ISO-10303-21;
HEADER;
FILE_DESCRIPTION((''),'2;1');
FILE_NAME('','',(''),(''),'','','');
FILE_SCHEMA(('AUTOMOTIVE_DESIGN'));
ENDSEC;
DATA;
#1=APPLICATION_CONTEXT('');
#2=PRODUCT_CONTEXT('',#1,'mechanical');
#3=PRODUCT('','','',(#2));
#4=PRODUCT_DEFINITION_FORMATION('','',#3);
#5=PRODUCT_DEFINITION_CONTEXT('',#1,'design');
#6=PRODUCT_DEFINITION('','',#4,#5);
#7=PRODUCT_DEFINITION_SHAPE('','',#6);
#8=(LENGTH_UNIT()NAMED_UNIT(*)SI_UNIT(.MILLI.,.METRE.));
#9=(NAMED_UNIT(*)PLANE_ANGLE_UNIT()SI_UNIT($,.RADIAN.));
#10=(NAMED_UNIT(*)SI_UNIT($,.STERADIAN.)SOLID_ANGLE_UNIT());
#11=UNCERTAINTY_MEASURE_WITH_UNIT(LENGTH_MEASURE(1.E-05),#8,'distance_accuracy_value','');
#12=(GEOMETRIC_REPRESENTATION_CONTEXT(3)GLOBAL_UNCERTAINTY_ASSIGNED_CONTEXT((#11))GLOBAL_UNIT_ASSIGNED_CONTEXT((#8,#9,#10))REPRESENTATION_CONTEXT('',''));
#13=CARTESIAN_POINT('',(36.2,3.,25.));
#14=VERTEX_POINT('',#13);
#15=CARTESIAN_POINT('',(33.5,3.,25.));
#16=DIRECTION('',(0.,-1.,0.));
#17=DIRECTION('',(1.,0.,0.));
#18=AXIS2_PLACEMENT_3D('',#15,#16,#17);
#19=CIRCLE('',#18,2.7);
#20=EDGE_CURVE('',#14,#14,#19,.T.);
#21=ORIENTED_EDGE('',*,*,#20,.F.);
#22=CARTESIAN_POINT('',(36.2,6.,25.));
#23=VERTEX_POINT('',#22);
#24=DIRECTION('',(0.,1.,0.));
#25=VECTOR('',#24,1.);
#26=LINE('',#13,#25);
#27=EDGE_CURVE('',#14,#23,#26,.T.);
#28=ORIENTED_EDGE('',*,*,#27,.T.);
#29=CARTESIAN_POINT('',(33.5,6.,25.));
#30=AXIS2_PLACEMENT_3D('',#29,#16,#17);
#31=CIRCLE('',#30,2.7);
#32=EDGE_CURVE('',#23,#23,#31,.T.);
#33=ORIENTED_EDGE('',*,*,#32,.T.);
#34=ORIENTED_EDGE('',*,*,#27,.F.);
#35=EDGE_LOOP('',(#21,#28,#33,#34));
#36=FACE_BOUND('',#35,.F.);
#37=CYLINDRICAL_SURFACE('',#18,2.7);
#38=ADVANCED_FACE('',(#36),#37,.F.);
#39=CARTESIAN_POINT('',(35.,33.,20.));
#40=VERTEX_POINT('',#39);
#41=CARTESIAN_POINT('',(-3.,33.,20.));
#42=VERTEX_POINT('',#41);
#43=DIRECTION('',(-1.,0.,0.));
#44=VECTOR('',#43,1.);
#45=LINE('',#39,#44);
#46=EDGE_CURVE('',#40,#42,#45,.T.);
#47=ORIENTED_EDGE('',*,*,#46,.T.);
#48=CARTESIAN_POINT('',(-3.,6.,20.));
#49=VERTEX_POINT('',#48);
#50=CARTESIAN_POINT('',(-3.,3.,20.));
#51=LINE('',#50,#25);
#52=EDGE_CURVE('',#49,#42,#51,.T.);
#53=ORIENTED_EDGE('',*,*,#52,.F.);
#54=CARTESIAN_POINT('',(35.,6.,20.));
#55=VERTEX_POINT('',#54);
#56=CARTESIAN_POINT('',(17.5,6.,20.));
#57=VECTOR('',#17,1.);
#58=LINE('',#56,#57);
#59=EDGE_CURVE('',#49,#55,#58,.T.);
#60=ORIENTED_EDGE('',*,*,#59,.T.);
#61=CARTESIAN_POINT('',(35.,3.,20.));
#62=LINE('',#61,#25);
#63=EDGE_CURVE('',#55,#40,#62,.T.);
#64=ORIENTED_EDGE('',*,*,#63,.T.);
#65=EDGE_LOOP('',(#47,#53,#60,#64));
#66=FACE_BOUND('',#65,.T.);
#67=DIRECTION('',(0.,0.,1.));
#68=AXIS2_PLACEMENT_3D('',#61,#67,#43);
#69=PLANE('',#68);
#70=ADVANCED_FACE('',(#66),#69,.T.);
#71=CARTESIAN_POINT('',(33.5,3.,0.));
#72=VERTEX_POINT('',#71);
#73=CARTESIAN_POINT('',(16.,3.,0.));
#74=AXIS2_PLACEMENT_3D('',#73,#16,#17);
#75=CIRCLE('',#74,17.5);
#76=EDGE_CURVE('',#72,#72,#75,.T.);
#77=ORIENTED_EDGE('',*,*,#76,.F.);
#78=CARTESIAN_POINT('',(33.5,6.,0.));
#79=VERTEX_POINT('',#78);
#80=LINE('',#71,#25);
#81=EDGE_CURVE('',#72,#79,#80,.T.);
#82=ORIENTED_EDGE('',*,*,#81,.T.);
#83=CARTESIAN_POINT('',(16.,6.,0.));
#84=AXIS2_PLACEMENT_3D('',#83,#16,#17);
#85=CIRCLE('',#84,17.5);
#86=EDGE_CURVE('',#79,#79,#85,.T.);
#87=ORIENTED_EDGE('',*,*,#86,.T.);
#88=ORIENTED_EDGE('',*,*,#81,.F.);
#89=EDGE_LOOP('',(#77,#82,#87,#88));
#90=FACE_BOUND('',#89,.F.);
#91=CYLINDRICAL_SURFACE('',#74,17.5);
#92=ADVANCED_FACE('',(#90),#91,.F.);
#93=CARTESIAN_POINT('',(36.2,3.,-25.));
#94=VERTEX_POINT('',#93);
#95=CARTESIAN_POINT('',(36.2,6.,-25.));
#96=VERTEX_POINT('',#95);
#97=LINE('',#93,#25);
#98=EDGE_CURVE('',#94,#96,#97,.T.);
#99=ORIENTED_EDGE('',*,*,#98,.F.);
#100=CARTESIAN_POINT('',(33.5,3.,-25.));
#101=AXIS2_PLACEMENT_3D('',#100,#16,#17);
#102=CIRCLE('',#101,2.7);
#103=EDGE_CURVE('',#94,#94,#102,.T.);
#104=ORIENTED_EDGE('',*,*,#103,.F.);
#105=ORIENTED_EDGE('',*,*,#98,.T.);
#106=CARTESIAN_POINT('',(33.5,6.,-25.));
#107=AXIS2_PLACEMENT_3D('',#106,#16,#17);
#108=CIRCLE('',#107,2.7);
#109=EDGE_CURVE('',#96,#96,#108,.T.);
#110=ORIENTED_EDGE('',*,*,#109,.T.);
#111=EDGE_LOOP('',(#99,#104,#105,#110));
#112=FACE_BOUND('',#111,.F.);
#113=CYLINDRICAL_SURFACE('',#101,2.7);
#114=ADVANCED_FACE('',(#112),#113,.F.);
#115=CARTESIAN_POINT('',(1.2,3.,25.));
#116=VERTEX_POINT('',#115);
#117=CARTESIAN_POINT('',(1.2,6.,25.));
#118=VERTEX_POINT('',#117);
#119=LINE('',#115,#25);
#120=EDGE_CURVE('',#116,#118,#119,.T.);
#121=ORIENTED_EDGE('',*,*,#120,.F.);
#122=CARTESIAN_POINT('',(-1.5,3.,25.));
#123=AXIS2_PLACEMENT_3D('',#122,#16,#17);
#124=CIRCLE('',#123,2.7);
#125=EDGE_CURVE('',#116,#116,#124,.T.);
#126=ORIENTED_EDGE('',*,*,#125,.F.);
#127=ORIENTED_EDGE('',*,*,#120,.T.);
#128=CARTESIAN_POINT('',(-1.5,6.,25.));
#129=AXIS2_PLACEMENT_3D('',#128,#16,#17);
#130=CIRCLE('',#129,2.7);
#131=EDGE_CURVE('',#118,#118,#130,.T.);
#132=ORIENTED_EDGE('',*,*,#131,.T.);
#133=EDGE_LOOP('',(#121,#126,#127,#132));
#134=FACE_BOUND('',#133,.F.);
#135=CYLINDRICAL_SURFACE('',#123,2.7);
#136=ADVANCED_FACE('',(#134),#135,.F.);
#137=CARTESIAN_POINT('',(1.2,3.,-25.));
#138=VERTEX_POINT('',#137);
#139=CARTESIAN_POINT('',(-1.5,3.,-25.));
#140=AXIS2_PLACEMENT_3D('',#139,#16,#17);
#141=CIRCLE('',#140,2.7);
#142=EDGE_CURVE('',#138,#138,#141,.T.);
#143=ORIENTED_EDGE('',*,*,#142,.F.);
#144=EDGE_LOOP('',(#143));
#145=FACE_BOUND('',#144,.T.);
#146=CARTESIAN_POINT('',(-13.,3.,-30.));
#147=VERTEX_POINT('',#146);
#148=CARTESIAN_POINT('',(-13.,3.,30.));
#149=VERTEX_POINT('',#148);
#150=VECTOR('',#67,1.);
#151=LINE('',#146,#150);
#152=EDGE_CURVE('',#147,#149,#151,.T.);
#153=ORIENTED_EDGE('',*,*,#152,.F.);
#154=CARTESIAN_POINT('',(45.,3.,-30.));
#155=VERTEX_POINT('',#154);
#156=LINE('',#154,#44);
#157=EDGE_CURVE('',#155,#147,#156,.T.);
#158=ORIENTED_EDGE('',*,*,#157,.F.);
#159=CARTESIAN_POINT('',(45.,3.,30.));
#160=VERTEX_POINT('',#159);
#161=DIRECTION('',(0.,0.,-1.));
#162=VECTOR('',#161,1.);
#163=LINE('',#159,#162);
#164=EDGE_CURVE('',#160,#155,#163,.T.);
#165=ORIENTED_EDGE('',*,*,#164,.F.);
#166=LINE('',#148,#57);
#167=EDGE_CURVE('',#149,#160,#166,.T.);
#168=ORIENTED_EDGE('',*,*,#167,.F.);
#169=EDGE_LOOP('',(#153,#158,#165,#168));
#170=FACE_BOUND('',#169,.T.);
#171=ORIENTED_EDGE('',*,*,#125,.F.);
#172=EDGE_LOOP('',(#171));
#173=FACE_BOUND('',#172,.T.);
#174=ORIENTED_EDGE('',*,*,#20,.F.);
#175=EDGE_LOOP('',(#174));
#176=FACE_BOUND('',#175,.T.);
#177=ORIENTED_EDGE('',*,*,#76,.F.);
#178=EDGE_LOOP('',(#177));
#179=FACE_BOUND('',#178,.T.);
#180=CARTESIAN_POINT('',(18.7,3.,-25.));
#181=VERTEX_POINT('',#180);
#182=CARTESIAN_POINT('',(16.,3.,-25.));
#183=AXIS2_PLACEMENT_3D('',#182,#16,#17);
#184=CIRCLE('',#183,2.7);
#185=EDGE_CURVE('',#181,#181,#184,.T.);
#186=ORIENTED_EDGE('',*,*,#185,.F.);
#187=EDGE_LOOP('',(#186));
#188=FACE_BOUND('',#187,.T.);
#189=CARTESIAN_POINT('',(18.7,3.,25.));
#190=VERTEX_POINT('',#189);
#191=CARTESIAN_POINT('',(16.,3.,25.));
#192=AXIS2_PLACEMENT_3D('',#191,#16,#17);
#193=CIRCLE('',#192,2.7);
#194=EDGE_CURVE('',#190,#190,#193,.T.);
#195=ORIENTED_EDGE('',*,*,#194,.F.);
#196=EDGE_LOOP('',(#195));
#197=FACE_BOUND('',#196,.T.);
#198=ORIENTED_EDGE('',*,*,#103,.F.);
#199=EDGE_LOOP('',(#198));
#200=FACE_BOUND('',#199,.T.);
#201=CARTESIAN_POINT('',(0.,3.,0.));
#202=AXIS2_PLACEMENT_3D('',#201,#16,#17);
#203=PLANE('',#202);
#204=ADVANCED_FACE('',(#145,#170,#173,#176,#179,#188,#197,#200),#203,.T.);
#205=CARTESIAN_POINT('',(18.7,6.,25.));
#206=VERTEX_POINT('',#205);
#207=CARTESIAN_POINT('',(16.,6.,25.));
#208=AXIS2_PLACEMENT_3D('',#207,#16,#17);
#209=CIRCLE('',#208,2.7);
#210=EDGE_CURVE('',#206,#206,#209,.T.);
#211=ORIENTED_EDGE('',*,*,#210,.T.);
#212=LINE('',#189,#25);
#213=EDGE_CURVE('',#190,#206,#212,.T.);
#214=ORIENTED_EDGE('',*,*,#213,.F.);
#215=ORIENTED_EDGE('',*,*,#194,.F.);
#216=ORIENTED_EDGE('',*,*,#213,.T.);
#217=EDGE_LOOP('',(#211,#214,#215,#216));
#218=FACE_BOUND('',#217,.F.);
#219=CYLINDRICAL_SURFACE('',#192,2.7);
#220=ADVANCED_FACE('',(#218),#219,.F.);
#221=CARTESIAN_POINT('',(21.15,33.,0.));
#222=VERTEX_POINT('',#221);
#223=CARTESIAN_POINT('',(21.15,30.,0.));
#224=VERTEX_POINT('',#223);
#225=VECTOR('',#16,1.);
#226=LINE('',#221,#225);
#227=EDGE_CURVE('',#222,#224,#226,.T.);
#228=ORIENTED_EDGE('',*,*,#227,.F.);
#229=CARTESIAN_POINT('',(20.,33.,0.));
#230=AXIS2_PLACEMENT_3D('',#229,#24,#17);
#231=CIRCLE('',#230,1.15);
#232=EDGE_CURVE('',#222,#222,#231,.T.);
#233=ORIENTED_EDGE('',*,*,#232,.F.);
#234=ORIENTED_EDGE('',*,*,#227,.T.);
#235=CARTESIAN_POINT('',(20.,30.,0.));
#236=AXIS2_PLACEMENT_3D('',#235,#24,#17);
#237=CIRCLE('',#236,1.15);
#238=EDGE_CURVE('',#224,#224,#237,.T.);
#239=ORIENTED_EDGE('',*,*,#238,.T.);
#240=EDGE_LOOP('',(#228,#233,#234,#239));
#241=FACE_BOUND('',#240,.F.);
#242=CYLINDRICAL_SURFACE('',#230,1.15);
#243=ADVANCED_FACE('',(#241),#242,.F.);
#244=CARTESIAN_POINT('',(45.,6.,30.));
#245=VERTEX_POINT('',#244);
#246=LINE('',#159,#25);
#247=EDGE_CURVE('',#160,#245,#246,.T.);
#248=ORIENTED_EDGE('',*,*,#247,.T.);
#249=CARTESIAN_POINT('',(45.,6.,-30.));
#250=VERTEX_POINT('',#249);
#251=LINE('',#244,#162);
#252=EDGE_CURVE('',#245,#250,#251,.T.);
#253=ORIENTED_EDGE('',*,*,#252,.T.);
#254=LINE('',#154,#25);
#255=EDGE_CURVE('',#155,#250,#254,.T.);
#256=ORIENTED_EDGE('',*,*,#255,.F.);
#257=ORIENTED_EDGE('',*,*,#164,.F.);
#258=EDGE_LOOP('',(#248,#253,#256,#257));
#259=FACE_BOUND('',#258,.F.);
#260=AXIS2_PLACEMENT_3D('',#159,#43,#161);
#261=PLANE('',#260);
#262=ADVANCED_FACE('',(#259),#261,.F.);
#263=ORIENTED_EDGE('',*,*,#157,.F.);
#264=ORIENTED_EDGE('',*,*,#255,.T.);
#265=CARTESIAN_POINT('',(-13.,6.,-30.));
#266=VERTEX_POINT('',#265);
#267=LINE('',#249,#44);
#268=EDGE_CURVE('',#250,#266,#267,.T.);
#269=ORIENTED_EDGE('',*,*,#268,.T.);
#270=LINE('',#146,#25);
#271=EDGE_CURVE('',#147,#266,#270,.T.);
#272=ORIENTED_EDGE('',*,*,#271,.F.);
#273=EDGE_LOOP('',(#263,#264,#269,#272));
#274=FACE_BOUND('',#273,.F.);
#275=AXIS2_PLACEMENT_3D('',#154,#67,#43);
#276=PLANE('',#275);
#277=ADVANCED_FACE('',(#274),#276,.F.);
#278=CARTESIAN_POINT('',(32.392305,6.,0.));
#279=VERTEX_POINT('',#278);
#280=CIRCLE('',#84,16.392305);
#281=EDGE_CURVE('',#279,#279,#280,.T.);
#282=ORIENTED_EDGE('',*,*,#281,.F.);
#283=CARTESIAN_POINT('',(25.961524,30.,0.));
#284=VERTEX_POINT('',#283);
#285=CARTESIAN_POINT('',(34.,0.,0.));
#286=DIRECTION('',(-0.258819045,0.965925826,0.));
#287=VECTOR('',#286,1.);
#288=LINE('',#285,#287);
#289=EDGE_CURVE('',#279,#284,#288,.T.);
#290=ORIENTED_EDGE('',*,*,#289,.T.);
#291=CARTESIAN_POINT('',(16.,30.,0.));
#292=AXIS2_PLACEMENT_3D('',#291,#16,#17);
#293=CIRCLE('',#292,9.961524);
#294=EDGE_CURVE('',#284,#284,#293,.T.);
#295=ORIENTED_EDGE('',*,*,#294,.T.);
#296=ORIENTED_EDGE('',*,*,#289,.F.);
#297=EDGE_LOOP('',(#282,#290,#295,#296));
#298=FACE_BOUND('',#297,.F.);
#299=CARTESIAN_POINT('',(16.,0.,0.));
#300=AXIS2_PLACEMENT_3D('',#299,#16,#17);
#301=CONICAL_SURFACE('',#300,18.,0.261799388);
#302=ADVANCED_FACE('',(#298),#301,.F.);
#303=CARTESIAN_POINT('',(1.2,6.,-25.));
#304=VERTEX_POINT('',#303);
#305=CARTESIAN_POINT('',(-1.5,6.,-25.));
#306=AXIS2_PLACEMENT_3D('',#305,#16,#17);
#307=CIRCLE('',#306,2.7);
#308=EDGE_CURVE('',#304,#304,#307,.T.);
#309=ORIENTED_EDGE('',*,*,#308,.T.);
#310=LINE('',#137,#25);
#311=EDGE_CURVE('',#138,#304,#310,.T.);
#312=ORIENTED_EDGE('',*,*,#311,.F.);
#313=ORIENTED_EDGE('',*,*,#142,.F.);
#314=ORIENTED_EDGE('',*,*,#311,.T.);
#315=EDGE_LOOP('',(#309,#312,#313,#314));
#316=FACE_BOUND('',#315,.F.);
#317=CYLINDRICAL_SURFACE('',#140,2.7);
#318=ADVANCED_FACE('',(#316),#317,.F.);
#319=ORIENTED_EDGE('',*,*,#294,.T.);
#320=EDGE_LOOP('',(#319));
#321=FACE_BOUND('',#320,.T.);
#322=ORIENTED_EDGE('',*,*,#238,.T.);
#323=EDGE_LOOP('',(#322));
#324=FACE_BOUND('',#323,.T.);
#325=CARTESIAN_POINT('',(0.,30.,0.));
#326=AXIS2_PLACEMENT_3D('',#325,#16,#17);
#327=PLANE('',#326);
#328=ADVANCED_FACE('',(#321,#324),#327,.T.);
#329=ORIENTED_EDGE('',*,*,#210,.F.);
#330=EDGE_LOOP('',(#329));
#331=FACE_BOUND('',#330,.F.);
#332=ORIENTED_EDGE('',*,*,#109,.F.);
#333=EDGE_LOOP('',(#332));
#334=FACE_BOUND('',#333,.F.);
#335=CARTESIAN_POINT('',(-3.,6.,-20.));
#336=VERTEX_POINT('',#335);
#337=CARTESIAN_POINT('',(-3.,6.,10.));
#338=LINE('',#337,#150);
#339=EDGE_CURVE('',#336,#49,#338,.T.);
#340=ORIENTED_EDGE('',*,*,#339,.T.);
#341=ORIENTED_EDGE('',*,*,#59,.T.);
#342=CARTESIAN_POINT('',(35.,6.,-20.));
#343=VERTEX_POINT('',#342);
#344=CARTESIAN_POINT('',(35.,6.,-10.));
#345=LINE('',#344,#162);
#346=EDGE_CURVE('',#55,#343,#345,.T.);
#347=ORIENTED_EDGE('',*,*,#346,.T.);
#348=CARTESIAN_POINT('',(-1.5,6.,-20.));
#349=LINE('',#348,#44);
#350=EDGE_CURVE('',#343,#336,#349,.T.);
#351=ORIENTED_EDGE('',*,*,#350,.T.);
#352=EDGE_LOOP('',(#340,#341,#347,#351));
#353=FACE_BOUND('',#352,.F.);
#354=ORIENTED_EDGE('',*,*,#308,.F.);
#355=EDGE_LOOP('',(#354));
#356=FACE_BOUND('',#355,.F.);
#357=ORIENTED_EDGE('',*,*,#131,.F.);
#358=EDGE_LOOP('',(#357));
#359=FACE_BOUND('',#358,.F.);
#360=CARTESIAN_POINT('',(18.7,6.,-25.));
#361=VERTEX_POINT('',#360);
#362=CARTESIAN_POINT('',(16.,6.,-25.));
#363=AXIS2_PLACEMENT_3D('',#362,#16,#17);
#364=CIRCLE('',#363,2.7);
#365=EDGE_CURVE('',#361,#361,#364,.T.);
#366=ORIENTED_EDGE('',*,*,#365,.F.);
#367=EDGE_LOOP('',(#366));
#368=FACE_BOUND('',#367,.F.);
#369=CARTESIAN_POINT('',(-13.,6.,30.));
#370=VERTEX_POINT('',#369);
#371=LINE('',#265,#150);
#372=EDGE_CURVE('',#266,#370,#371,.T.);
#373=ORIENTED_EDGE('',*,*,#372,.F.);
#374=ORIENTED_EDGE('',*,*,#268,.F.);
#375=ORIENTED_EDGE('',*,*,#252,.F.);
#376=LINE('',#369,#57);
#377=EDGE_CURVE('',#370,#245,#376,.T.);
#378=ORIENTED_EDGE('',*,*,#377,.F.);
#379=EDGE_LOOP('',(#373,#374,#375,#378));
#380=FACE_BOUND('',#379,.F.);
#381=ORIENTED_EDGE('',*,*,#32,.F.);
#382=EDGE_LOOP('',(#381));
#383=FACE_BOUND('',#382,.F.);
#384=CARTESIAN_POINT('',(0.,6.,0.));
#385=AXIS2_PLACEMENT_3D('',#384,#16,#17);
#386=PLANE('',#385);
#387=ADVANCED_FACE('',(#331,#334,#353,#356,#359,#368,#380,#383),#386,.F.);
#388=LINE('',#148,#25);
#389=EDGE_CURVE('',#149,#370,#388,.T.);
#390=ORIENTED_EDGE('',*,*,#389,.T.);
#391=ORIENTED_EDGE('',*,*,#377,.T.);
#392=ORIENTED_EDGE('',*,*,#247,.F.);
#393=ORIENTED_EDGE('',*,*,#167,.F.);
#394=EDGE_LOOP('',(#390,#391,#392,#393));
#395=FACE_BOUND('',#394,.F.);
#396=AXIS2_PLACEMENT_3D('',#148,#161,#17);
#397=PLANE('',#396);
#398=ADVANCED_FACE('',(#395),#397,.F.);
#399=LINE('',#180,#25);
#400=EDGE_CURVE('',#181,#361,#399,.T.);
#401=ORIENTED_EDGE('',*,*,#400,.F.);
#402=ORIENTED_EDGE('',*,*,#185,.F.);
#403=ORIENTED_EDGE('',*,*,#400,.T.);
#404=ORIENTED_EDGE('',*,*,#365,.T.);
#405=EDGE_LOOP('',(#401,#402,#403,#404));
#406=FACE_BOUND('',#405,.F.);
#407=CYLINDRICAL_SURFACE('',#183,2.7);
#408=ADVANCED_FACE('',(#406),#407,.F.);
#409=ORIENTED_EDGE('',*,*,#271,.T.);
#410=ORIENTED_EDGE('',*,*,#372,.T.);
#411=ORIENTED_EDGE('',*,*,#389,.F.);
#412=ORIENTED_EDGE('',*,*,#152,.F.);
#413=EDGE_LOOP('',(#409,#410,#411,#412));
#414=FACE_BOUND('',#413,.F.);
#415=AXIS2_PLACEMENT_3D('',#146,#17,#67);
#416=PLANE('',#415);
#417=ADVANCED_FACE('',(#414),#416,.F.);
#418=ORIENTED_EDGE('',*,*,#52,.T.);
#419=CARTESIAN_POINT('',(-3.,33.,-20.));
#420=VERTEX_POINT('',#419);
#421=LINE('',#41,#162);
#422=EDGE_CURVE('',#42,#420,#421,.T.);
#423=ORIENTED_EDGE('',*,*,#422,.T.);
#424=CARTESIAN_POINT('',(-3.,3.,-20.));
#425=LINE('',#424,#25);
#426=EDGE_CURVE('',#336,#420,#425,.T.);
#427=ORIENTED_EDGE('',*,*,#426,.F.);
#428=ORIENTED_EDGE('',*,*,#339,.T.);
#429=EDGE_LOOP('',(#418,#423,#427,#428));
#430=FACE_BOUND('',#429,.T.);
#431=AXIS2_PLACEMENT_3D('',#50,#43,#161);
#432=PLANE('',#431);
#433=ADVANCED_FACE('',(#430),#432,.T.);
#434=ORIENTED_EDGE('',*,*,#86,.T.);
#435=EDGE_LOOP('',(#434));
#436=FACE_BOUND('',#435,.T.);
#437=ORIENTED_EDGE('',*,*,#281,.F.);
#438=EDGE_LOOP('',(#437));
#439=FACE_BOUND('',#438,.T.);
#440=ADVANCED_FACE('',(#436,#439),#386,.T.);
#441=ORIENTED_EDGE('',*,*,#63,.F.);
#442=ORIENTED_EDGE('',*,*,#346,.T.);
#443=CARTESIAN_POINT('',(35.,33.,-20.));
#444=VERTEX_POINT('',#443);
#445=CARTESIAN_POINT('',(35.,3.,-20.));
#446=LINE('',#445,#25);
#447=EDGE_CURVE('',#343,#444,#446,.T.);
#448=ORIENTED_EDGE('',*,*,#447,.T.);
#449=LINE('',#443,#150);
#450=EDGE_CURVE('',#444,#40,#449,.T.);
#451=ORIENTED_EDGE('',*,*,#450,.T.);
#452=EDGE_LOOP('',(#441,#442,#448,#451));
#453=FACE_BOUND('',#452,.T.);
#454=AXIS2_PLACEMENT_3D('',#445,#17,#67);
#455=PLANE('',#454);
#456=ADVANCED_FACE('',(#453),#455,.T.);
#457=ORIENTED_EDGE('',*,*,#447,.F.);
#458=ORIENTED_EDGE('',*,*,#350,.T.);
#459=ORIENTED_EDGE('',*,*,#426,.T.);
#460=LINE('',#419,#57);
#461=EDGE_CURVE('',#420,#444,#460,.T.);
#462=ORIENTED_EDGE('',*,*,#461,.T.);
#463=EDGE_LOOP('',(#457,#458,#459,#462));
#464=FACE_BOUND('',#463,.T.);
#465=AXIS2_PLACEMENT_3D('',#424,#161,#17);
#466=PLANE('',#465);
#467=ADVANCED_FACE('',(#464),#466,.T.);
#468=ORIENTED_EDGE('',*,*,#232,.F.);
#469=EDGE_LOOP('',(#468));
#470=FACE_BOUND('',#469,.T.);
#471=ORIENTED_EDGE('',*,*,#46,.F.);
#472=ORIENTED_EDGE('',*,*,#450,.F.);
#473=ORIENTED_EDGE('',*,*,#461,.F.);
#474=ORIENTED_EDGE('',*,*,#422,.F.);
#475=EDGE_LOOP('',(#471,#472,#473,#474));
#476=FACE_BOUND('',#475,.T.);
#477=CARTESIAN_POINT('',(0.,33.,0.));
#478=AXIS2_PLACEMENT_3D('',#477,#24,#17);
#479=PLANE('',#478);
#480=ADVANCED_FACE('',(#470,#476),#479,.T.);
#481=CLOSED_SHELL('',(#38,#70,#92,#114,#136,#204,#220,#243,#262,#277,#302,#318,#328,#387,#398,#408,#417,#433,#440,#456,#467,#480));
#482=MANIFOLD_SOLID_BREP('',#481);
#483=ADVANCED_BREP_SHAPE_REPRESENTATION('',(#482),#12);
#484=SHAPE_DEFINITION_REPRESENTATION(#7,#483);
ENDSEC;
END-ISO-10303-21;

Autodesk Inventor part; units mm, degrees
ref_plane "YZ Plane" through (0, 0, 0) normal (1, 0, 0) x (0, 1, 0)
ref_plane "XZ Plane" through (0, 0, 0) normal (0, 1, 0) x (-1, 0, 0)
ref_plane "XY Plane" through (0, 0, 0) normal (0, 0, 1) x (1, 0, 0)
ref_plane "Work Plane5" through (0, 3, 0) normal (0, 1, 0) x (1, 0, 0)
sketch "Sketch45" plane through (0, 3, 0) normal (0, 1, 0) x (1, 0, 0)
  line L0 (35, -20) -> (-3, -20)
  line L1 (-3, -20) -> (-3, 20)
  line L2 (-3, 20) -> (35, 20)
  line L3 (35, 20) -> (35, -20)
  point P0 (0, 0)
  dimension "d142" = 38
  dimension "d143" = 40
extrude "Extrusion34" add sketch "Sketch45" along normal blind 30
ref_plane "Work Plane2" through (0, 0, 0) normal (0, -1, 0) x (1, 0, 0)
sketch "Sketch47" plane through (0, 0, 0) normal (0, -1, 0) x (1, 0, 0)
  circle A0 centre (16, 0) radius 18
  point P0 (0, 0)
  dimension "d146" = 36
extrude "Extrusion35" cut sketch "Sketch47" against normal blind 30 draft -15
ref_plane "Work Plane1" through (0, 3, 0) normal (0, 1, 0) x (1, 0, 0)
sketch "Sketch74" plane through (0, 33, 0) normal (0, 1, 0) x (1, 0, 0)
  circle A0 centre (20, 0) radius 1.15
  point P0 (0, 0)
  dimension "d210" = 2.3
extrude "Extrusion51" cut sketch "Sketch74" against normal blind 10
sketch "Sketch77" plane through (0, 3, 0) normal (0, -1, 0) x (1, 0, 0)
  circle A0 centre (16, 0) radius 17.5
  point P0 (0, 0)
  dimension "d219" = 35
sketch "Sketch78" plane through (0, 3, 0) normal (0, -1, 0) x (1, 0, 0)
  line L0 (45, -30) -> (-13, -30)
  line L1 (-13, -30) -> (-13, 30)
  line L2 (-13, 30) -> (45, 30)
  line L3 (45, 30) -> (45, -30)
  line L4 (45, -30) -> (-13, 30) construction
  line L5 (-13, -30) -> (45, 30) construction
  point P0 (0, 0)
  point P1 (16, 0)
  dimension "d220" = 58
  dimension "d221" = 60
extrude "Extrusion53" add sketch "Sketch78" against normal blind 3
extrude "Extrusion54" cut sketch "Sketch77" against normal blind 3
sketch "Sketch81" plane through (0, 3, 0) normal (0, -1, 0) x (1, 0, 0)
  circle A0 centre (33.5, -25) radius 2.7
  line L0 (-13, -30) -> (45, -30) projected
  line L1 (45, -30) -> (45, 30) projected
  circle A1 centre (16, -25) radius 2.7
  circle A2 centre (-1.5, -25) radius 2.7
  circle A3 centre (-1.5, 25) radius 2.7
  circle A4 centre (16, 25) radius 2.7
  circle A5 centre (33.5, 25) radius 2.7
  point P0 (0, 0)
  dimension "mag_D" = 5.4
  dimension "d232" = 5
  dimension "d233" = 11.5
  dimension "d234" = 5.4
  dimension "d235" = 17.5
  dimension "d236" = 5.4
  dimension "d237" = 17.5
  dimension "d243" = 5.4
  dimension "d245" = 5.4
  dimension "d246" = 17.5
  dimension "d247" = 5.4
  dimension "d248" = 17.5
extrude "Extrusion56" cut sketch "Sketch81" against normal blind 30
equation "\"d234\" = mag_D"
equation "\"d236\" = mag_D"
equation "\"d237\" = d235"
equation "\"d243\" = mag_D"
equation "\"d245\" = mag_D"
equation "\"d246\" = d235"
equation "\"d247\" = mag_D"
equation "\"d248\" = d235"
properties part number "liquid_port_v06"
